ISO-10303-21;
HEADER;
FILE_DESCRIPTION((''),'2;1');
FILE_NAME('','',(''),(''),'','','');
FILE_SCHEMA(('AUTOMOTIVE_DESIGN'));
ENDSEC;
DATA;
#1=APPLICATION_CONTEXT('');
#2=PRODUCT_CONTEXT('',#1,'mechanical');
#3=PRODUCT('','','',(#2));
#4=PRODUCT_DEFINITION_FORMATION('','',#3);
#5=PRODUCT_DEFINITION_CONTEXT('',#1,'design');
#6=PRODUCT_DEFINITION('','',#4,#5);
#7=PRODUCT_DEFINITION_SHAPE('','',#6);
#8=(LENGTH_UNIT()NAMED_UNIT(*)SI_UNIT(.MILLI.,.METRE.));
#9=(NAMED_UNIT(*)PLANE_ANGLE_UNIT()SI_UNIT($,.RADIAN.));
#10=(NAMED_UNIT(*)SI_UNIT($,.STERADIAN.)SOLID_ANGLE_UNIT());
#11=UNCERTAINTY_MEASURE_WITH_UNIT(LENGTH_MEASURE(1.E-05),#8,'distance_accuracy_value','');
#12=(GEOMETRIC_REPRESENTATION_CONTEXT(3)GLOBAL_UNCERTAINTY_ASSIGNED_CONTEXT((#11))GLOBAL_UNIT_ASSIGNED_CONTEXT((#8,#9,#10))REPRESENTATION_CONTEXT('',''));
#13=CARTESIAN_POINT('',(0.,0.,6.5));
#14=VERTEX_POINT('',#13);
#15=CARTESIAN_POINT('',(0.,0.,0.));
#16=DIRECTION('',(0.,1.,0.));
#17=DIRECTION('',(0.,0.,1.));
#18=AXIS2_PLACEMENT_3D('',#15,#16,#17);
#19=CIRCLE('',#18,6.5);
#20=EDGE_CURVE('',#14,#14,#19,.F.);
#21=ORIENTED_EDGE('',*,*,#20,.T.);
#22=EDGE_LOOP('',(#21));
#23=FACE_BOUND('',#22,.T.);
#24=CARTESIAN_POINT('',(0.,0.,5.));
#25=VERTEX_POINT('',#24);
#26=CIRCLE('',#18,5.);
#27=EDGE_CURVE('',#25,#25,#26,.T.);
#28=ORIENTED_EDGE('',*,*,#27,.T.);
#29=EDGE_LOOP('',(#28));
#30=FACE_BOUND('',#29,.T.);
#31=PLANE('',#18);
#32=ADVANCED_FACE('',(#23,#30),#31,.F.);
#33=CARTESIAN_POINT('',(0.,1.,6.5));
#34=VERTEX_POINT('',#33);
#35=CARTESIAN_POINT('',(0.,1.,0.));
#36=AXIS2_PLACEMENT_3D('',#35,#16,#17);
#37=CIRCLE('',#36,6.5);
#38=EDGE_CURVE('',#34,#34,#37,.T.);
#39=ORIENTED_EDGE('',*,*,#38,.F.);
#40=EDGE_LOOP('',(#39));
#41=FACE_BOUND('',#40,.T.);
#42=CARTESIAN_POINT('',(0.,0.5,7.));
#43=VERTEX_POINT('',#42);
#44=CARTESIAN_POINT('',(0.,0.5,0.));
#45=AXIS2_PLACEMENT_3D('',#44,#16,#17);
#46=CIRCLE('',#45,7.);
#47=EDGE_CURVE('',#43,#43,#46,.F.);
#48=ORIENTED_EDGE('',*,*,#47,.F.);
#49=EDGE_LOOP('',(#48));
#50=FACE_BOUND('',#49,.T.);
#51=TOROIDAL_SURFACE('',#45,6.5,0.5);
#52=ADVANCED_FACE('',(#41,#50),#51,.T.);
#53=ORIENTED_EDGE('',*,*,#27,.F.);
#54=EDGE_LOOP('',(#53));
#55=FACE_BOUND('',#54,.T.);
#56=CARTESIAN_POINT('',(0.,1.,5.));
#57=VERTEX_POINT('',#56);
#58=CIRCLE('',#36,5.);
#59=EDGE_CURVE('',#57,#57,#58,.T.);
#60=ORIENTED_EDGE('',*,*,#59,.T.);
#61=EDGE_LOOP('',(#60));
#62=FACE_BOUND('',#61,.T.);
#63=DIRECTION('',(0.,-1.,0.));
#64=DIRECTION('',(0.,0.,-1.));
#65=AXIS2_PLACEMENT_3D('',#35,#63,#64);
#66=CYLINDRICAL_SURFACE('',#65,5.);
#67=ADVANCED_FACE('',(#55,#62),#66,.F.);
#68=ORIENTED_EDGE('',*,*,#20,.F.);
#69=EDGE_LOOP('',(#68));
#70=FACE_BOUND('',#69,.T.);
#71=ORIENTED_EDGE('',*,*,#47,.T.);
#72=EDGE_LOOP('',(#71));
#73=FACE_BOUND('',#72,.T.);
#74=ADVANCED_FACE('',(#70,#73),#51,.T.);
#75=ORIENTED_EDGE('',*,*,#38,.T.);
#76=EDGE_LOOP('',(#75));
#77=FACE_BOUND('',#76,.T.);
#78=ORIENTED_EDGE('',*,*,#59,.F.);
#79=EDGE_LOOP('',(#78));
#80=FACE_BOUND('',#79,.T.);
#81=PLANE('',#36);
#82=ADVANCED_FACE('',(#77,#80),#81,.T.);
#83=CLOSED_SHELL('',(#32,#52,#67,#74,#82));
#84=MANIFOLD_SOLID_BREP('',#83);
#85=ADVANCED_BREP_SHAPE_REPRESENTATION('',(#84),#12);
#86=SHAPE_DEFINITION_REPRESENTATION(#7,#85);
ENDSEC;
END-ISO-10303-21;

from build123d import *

# Parameters (mm, degrees)
SKETCH_1_R      = 7
SKETCH_1_R_2    = 5
EXTRUDE_1_DEPTH = 1
FILLET_1_R      = 0.5


with BuildPart() as part:
    # 草图1 → 凸台-拉伸1 (new body)
    with BuildSketch(Plane(origin=(0, 0, 0), x_dir=(1, 0, 0), z_dir=(0, 1, 0))):
        with Locations(Location((0, 0, 0), (0, 0, 270))):
            Circle(SKETCH_1_R)
        with Locations(Location((0, 0, 0), (0, 0, 270))):
            Circle(SKETCH_1_R_2, mode=Mode.SUBTRACT)
    extrude(amount=EXTRUDE_1_DEPTH)

    # 圆角1
    fillet_1_edges = [part.edges().sort_by_distance(p)[0] for p in [
        (0, 0, -7),
        (0, 1, -7),
    ]]
    fillet(fillet_1_edges, radius=FILLET_1_R - 0.0001)  # a hair under: the kernel refuses the full size


solid = part.part
